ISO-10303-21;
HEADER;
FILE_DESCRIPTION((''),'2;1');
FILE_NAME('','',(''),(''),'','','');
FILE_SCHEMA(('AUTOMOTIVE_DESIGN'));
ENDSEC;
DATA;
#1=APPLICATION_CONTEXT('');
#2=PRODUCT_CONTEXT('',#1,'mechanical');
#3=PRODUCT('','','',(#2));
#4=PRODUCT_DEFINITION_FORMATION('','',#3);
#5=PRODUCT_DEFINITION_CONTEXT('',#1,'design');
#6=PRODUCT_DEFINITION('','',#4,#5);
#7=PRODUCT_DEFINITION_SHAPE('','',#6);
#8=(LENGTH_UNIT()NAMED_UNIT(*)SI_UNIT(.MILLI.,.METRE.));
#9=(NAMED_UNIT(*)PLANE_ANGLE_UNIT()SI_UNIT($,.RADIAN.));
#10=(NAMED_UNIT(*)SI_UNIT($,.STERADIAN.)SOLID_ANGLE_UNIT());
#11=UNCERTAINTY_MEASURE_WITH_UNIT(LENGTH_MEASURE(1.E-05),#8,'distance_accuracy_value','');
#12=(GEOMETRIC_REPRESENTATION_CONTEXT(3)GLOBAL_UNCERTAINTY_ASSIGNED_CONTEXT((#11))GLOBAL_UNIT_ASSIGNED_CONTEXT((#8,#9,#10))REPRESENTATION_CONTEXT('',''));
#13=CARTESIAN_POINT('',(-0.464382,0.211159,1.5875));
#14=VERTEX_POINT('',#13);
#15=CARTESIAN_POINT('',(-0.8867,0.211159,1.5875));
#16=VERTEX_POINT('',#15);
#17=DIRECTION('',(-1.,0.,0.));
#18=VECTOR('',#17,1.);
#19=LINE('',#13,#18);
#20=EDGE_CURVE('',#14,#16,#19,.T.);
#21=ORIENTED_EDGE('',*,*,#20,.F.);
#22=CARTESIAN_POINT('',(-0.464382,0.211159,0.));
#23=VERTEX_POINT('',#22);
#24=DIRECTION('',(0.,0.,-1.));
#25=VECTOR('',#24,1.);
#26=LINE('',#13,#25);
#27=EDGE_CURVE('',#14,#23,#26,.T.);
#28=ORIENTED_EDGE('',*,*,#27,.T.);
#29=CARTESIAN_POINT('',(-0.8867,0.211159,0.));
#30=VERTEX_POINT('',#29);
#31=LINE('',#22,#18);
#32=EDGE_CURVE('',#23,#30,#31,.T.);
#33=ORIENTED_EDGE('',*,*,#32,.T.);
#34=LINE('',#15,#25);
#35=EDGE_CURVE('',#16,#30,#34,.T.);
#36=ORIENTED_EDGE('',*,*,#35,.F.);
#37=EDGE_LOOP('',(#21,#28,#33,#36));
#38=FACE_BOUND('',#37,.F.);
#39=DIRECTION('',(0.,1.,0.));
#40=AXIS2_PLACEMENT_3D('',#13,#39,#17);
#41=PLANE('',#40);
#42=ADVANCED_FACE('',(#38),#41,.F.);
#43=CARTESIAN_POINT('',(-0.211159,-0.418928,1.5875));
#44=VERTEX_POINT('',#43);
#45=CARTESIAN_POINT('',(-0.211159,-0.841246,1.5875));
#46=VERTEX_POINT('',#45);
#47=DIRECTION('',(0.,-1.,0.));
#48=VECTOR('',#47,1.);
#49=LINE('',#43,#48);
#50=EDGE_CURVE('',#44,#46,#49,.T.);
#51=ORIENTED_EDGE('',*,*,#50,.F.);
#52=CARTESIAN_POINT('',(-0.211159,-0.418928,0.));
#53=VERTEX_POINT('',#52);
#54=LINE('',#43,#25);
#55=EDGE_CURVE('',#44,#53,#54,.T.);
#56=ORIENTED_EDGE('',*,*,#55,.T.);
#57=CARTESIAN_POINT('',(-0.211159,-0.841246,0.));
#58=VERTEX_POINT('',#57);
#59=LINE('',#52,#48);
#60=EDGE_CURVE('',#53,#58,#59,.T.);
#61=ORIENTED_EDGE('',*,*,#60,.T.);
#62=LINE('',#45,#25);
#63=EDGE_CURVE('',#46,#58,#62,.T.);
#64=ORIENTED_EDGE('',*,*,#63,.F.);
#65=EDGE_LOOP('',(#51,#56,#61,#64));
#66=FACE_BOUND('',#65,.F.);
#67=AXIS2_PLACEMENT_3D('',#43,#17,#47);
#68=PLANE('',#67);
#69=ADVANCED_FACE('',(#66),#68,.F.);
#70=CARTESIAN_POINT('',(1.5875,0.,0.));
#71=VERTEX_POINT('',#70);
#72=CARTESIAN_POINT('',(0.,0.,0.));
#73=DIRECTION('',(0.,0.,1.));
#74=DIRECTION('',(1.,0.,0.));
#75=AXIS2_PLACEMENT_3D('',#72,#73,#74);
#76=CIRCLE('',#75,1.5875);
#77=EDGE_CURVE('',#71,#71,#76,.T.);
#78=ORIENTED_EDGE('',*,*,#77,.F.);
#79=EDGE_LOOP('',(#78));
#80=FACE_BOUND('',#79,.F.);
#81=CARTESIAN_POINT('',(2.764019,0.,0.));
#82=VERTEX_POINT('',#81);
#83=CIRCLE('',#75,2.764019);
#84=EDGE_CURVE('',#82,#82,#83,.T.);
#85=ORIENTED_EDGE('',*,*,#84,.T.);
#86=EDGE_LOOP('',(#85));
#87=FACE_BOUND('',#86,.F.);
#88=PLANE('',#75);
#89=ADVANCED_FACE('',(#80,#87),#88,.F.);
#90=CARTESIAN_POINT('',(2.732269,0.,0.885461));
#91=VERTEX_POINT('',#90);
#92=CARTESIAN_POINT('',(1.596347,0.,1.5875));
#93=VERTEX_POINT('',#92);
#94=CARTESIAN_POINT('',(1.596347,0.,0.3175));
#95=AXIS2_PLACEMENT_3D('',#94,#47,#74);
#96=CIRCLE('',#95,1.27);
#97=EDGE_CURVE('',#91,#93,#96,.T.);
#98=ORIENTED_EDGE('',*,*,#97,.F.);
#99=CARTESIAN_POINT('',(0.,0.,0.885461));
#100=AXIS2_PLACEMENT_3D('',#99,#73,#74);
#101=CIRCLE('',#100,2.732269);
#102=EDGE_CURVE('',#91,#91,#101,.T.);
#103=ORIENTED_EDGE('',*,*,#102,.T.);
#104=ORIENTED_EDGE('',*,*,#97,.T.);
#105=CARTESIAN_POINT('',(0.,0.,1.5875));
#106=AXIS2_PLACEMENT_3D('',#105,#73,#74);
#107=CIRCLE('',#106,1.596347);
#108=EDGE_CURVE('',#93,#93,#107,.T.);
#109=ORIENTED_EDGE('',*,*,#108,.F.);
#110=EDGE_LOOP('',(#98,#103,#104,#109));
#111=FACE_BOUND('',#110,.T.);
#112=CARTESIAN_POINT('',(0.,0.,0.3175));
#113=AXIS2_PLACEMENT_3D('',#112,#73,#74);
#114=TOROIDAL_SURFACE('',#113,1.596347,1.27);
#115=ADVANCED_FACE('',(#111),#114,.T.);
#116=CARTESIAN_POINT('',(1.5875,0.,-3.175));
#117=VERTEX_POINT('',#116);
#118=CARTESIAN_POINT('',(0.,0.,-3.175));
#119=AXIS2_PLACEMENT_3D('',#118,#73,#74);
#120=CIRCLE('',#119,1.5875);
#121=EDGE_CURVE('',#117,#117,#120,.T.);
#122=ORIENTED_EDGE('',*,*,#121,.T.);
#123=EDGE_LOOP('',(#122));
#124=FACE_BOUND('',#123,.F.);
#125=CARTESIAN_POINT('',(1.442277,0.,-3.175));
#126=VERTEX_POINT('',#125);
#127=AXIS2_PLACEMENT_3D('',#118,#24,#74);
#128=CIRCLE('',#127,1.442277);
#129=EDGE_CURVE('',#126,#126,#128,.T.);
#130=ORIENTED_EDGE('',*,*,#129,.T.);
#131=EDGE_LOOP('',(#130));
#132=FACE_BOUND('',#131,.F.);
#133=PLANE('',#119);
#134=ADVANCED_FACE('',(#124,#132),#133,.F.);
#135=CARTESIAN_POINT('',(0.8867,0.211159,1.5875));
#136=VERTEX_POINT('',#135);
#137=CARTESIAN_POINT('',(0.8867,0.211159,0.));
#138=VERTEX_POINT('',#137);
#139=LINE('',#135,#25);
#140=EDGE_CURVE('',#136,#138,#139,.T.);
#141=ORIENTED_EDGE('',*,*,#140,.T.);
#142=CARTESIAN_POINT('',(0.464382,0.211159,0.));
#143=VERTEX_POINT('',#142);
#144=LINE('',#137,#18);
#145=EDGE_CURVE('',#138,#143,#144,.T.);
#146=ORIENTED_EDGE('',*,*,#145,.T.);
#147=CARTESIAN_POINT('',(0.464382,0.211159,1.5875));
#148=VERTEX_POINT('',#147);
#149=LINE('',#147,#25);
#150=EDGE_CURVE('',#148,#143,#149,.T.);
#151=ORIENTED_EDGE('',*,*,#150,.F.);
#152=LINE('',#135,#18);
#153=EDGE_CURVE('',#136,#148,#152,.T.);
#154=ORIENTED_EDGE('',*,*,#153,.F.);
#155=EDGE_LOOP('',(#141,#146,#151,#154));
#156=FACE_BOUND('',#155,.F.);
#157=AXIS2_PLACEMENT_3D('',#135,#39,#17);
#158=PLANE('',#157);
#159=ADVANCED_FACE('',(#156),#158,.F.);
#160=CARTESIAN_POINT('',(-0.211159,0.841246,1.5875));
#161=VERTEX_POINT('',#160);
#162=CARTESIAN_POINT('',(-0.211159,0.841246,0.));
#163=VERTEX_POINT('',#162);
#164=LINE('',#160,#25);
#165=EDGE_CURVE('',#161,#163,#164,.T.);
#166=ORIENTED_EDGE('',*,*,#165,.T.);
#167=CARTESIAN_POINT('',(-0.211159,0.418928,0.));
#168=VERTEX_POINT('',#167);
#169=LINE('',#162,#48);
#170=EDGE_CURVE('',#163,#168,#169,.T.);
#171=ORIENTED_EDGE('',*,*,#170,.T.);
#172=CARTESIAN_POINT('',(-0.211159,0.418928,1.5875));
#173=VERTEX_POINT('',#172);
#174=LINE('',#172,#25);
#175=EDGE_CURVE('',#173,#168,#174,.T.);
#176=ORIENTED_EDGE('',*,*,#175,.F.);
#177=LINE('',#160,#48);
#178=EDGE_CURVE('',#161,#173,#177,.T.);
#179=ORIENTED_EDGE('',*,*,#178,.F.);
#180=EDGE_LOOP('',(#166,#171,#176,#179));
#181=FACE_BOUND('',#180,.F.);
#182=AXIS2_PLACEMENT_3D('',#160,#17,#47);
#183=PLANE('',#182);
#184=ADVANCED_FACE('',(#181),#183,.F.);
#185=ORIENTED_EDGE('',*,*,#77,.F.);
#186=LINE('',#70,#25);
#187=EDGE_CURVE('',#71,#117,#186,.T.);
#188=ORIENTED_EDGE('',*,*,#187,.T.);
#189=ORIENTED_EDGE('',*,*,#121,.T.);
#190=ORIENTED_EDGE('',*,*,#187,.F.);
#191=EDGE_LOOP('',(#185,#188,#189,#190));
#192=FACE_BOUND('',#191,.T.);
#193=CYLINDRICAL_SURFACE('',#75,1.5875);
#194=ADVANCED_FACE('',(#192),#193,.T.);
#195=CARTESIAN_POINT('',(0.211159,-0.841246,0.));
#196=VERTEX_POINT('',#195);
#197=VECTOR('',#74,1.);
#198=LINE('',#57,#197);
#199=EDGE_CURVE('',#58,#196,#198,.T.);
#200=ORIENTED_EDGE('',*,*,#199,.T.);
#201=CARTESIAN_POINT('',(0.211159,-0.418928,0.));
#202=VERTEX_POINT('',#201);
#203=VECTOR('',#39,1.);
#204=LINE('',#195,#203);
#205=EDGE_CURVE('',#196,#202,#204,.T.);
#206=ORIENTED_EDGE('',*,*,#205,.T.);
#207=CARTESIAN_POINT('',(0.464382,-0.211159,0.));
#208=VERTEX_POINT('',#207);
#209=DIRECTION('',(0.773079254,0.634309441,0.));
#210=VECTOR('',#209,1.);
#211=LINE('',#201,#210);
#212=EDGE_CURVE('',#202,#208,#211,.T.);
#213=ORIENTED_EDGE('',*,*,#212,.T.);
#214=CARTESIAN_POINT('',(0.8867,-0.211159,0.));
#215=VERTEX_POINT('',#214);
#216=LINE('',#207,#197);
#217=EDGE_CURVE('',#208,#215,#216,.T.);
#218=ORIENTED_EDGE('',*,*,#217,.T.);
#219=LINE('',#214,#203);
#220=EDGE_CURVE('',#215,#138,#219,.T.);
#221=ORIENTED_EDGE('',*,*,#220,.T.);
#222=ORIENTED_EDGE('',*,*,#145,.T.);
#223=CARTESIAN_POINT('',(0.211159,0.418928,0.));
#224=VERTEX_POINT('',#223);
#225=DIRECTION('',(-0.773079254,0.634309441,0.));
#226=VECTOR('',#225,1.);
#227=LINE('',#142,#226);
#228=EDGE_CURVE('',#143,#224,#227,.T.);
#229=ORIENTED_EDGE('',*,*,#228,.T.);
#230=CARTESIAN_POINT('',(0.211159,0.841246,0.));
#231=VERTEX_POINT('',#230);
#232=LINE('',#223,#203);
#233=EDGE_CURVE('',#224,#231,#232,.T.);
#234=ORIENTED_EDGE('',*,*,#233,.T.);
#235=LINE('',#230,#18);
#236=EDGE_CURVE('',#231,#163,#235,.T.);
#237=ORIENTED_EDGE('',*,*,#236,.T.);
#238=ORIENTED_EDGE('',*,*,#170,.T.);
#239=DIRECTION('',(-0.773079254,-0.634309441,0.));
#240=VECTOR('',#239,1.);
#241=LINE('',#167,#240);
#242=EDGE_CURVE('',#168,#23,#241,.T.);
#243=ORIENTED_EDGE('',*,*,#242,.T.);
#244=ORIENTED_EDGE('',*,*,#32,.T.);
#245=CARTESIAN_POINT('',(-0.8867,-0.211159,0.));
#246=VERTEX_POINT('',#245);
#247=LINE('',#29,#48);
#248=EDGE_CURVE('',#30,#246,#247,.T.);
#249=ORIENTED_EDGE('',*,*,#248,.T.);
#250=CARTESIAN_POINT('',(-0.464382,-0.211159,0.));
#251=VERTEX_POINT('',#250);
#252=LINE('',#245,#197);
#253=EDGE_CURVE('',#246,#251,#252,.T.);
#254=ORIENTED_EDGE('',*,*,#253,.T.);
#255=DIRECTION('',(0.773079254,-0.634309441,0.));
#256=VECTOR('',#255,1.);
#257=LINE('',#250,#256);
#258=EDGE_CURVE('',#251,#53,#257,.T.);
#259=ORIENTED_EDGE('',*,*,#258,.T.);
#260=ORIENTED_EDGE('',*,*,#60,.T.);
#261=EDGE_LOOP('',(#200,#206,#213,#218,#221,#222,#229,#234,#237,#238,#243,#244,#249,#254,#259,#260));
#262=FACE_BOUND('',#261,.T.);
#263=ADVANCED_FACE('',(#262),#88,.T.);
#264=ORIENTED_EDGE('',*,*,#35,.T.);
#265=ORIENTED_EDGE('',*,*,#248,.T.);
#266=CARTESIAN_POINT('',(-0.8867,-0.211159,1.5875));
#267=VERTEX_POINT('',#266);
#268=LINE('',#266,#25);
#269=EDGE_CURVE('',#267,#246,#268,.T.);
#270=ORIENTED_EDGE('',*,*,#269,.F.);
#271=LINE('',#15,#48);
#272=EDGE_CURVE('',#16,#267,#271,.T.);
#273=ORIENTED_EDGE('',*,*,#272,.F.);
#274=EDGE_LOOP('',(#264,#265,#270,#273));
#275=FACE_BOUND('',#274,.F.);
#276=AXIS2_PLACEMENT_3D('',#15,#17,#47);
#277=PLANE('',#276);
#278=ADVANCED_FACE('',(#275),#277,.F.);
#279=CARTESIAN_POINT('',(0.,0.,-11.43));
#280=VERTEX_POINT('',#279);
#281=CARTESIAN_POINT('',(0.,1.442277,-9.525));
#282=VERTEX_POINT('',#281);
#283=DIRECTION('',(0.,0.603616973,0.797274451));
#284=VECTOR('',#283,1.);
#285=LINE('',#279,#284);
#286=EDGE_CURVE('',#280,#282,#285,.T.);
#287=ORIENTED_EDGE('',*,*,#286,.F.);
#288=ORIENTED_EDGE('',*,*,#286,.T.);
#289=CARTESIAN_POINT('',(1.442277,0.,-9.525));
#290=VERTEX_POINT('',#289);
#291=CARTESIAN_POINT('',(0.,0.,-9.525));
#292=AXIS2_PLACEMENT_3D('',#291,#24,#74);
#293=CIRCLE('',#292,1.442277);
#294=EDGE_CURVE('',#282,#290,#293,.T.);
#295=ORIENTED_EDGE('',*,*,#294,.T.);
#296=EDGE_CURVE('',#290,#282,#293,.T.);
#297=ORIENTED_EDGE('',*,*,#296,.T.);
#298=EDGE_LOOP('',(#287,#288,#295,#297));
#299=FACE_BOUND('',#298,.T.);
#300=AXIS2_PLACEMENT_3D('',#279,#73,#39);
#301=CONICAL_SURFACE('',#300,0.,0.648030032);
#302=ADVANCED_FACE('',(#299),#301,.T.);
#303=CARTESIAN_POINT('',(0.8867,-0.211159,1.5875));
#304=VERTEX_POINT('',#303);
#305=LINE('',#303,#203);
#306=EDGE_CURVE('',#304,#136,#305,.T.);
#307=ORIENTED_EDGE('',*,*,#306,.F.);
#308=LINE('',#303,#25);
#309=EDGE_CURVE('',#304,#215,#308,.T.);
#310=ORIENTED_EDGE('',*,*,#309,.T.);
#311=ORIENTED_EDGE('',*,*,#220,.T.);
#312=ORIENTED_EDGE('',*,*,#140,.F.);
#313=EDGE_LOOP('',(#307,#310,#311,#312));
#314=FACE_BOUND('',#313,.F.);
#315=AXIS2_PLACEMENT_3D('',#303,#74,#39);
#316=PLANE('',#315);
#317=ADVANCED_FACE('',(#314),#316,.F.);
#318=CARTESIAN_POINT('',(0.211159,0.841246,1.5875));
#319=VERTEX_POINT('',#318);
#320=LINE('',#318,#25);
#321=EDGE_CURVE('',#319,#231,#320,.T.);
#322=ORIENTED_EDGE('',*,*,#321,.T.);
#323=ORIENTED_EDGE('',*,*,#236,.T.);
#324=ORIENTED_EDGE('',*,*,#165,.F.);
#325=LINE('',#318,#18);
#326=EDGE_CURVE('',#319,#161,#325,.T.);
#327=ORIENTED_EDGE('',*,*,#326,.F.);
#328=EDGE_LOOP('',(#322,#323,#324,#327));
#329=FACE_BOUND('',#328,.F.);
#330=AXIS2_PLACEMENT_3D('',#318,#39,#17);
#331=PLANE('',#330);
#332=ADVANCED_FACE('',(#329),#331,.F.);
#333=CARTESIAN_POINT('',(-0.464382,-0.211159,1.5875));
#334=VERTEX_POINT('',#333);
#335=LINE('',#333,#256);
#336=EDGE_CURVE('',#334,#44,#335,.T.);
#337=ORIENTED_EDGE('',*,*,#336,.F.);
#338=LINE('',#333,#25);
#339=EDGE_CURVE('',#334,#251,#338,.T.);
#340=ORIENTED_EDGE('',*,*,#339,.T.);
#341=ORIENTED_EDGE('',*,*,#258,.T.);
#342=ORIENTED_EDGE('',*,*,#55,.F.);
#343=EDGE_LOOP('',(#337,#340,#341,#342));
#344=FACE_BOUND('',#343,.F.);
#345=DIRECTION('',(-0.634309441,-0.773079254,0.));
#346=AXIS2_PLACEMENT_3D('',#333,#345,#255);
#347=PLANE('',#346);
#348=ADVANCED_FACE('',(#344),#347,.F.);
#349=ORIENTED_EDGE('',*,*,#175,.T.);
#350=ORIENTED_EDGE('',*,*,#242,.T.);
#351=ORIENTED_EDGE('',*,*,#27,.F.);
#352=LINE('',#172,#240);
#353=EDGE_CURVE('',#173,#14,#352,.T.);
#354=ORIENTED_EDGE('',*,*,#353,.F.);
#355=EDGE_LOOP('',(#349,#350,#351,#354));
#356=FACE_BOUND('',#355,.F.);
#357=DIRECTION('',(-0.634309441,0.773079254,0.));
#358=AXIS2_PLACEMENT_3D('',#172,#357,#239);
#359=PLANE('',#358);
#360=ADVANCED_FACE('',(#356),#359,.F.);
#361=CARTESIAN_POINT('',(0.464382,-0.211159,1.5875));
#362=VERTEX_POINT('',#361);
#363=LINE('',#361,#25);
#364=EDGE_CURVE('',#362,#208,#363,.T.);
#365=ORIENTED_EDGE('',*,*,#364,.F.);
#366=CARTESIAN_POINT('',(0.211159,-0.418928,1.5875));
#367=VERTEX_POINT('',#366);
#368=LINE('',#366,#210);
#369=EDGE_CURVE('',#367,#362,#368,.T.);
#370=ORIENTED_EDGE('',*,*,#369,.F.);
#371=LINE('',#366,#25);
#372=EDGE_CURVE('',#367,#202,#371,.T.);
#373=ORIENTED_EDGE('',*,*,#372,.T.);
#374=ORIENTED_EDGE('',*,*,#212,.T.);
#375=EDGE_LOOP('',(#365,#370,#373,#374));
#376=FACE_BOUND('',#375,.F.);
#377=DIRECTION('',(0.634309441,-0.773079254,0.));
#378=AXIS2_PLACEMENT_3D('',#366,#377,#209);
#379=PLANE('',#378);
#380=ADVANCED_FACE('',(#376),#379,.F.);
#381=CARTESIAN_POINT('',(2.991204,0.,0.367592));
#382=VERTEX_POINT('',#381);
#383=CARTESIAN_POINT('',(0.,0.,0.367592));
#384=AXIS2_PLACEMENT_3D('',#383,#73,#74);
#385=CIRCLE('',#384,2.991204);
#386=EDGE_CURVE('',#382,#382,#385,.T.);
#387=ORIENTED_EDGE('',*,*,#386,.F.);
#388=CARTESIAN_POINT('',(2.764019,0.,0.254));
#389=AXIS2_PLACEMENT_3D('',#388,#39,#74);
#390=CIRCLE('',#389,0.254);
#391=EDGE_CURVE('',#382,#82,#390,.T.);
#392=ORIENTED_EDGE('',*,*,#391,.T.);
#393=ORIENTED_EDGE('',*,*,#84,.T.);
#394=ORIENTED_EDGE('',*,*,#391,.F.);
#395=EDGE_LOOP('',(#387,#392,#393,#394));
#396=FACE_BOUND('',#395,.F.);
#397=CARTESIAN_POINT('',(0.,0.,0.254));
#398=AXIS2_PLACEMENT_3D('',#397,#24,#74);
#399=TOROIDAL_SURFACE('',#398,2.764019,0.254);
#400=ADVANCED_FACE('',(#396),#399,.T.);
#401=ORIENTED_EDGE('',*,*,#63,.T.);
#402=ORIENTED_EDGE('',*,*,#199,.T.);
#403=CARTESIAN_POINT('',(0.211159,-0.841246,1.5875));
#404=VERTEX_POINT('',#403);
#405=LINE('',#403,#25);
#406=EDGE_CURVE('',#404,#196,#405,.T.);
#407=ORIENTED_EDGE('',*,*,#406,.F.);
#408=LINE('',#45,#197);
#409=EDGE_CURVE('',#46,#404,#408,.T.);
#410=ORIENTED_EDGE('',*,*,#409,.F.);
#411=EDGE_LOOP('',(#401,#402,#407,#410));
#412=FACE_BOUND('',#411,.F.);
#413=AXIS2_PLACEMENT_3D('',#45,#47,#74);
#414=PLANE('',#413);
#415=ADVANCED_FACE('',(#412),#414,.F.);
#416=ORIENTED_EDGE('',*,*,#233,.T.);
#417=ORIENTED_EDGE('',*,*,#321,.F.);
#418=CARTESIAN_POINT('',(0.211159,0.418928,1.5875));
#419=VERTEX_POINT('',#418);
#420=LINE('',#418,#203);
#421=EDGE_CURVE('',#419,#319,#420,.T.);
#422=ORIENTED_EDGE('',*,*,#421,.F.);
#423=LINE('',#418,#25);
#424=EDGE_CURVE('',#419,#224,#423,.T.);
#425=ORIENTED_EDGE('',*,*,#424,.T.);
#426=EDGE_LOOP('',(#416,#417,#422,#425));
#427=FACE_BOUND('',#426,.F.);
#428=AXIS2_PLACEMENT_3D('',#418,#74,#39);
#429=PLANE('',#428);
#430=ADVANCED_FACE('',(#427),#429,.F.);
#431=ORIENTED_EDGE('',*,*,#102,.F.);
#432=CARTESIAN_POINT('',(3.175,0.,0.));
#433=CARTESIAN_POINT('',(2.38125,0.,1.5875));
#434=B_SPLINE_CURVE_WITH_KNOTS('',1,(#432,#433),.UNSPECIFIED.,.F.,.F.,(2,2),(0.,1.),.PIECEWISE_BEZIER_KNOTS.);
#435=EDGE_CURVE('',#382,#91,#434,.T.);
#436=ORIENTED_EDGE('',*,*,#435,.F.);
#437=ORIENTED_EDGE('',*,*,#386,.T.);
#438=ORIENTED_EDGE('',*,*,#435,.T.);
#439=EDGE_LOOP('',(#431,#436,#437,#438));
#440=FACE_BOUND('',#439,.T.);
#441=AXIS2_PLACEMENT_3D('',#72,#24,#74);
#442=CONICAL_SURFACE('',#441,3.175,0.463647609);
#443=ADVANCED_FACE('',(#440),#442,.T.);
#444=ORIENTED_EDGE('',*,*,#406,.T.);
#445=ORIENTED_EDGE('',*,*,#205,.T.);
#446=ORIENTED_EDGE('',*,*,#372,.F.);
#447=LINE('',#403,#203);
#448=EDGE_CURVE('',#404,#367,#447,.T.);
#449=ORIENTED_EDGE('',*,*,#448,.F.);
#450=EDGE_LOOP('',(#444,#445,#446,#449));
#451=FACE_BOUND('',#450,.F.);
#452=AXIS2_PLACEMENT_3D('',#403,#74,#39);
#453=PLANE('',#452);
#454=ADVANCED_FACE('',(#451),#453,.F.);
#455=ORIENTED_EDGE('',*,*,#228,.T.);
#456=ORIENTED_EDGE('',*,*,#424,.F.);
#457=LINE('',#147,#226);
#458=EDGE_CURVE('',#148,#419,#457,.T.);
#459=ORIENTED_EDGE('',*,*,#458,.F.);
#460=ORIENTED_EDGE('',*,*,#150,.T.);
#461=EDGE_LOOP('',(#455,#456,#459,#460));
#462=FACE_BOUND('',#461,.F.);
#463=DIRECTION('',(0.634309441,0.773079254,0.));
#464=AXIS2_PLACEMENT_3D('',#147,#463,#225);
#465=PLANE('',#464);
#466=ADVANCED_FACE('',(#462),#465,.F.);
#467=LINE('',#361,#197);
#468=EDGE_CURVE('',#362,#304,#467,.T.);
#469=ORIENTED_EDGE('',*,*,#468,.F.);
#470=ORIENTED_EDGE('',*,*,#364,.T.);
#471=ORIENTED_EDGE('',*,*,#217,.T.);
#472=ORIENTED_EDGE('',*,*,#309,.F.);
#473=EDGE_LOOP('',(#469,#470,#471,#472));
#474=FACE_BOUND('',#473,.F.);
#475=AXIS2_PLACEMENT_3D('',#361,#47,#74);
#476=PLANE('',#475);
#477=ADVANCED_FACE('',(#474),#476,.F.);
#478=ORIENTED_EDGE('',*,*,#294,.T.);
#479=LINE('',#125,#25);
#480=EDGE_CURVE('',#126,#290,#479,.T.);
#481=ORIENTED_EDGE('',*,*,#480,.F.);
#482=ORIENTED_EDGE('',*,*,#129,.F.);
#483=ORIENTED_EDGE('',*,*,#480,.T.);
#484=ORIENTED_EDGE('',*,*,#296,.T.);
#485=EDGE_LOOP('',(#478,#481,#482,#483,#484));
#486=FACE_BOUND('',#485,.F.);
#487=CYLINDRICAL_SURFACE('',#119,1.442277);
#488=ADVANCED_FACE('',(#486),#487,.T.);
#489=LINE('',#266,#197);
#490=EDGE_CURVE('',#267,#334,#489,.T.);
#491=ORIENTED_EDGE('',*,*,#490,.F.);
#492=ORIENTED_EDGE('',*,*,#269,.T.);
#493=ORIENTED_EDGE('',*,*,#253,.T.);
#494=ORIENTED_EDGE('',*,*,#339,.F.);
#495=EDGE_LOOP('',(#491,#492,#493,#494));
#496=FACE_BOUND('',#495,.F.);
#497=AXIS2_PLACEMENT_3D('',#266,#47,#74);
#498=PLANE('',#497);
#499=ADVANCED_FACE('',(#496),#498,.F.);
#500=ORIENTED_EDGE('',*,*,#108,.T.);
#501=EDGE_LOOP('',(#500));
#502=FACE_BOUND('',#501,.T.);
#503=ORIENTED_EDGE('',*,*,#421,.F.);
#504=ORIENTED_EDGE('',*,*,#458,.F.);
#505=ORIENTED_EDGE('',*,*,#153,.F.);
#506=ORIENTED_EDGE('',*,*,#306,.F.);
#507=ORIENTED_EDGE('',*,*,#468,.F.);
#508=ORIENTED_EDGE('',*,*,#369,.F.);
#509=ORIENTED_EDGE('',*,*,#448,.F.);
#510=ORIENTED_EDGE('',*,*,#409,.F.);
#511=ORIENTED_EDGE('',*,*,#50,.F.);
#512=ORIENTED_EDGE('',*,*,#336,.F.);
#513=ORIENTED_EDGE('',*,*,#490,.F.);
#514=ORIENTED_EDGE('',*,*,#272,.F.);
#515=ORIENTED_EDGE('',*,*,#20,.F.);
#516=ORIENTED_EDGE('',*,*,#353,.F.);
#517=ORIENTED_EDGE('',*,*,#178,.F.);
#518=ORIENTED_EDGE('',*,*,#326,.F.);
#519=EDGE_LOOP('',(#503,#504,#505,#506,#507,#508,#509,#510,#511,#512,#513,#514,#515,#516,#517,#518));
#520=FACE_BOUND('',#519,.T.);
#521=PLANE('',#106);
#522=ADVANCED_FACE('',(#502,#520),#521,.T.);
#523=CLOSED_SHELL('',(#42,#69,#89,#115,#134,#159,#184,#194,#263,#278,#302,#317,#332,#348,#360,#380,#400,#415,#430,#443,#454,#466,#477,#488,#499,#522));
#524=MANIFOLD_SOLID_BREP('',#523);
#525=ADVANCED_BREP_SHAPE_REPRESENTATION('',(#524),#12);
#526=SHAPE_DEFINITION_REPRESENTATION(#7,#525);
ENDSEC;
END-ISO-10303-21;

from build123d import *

# Parameters (mm, degrees)
F0_R      = 3.175
F2_R      = 2.38125
F4_R      = 1.27
F5_R      = 0.254
F7_DEPTH  = 1.5875
F8_R      = 1.5875
F9_DEPTH  = 3.175
F10_R     = 1.4422766601
F11_DEPTH = 6.35


# Not quite as in the source:
# - a length typed as a fraction of an inch, garbled in the dataset ("3 / 203.2 mm" for 3/8 in), is restored


with BuildPart() as f3:
    # F0 (on Top) → F3 section 0
    with BuildSketch(Plane.XY):
        Circle(F0_R)
    # F2 (on offset) → F3 section 1
    with BuildSketch(Plane.XY.offset(1.5875)):
        Circle(F2_R)
    loft()

    # F4
    f4_edges = [f3.edges().sort_by_distance(p)[0] for p in [
        (-2.38125, 0, 1.5875),
    ]]
    fillet(f4_edges, radius=F4_R)

    # F5
    f5_edges = [f3.edges().sort_by_distance(p)[0] for p in [
        (-3.175, 0, 0),
    ]]
    fillet(f5_edges, radius=F5_R)

    # F6 (on face) → F7 (cut)
    with BuildSketch(Plane.XY.offset(1.5875)):
        Polygon((-0.2111591544, 0.8412458697), (-0.2111591544, 0.4189275609), (-0.4643816895, 0.2111591544), (-0.8866999983, 0.2111591544), (-0.8866999983, -0.2111591544), (-0.4643816895, -0.2111591544), (-0.2111591544, -0.4189275609), (-0.2111591544, -0.8412458697), (0.2111591544, -0.8412458697), (0.2111591544, -0.4189275609), (0.4643816895, -0.2111591544), (0.8866999983, -0.2111591544), (0.8866999983, 0.2111591544), (0.4643816895, 0.2111591544), (0.2111591544, 0.4189275609), (0.2111591544, 0.8412458697), align=None)
    extrude(amount=-F7_DEPTH, mode=Mode.SUBTRACT)

    # F8 (on Top) → F9 (join)
    with BuildSketch(Plane.XY):
        Circle(F8_R)
    extrude(amount=-F9_DEPTH)

    # F10 (on face) → F11 (join)
    with BuildSketch(Plane(origin=(0, 0, -3.175), x_dir=(1, 0, 0), z_dir=(0, 0, -1))):
        Circle(F10_R)
    extrude(amount=F11_DEPTH)

    # F12 (on Right) → F13 (revolve)
    with BuildSketch(Plane.YZ):
        Polygon((0, -11.43), (1.4422766601, -9.525), (0, -9.525), align=None)
    revolve(axis=Axis((0, 0, -10.4775), (0, 0, 1)))


solid = f3.part
